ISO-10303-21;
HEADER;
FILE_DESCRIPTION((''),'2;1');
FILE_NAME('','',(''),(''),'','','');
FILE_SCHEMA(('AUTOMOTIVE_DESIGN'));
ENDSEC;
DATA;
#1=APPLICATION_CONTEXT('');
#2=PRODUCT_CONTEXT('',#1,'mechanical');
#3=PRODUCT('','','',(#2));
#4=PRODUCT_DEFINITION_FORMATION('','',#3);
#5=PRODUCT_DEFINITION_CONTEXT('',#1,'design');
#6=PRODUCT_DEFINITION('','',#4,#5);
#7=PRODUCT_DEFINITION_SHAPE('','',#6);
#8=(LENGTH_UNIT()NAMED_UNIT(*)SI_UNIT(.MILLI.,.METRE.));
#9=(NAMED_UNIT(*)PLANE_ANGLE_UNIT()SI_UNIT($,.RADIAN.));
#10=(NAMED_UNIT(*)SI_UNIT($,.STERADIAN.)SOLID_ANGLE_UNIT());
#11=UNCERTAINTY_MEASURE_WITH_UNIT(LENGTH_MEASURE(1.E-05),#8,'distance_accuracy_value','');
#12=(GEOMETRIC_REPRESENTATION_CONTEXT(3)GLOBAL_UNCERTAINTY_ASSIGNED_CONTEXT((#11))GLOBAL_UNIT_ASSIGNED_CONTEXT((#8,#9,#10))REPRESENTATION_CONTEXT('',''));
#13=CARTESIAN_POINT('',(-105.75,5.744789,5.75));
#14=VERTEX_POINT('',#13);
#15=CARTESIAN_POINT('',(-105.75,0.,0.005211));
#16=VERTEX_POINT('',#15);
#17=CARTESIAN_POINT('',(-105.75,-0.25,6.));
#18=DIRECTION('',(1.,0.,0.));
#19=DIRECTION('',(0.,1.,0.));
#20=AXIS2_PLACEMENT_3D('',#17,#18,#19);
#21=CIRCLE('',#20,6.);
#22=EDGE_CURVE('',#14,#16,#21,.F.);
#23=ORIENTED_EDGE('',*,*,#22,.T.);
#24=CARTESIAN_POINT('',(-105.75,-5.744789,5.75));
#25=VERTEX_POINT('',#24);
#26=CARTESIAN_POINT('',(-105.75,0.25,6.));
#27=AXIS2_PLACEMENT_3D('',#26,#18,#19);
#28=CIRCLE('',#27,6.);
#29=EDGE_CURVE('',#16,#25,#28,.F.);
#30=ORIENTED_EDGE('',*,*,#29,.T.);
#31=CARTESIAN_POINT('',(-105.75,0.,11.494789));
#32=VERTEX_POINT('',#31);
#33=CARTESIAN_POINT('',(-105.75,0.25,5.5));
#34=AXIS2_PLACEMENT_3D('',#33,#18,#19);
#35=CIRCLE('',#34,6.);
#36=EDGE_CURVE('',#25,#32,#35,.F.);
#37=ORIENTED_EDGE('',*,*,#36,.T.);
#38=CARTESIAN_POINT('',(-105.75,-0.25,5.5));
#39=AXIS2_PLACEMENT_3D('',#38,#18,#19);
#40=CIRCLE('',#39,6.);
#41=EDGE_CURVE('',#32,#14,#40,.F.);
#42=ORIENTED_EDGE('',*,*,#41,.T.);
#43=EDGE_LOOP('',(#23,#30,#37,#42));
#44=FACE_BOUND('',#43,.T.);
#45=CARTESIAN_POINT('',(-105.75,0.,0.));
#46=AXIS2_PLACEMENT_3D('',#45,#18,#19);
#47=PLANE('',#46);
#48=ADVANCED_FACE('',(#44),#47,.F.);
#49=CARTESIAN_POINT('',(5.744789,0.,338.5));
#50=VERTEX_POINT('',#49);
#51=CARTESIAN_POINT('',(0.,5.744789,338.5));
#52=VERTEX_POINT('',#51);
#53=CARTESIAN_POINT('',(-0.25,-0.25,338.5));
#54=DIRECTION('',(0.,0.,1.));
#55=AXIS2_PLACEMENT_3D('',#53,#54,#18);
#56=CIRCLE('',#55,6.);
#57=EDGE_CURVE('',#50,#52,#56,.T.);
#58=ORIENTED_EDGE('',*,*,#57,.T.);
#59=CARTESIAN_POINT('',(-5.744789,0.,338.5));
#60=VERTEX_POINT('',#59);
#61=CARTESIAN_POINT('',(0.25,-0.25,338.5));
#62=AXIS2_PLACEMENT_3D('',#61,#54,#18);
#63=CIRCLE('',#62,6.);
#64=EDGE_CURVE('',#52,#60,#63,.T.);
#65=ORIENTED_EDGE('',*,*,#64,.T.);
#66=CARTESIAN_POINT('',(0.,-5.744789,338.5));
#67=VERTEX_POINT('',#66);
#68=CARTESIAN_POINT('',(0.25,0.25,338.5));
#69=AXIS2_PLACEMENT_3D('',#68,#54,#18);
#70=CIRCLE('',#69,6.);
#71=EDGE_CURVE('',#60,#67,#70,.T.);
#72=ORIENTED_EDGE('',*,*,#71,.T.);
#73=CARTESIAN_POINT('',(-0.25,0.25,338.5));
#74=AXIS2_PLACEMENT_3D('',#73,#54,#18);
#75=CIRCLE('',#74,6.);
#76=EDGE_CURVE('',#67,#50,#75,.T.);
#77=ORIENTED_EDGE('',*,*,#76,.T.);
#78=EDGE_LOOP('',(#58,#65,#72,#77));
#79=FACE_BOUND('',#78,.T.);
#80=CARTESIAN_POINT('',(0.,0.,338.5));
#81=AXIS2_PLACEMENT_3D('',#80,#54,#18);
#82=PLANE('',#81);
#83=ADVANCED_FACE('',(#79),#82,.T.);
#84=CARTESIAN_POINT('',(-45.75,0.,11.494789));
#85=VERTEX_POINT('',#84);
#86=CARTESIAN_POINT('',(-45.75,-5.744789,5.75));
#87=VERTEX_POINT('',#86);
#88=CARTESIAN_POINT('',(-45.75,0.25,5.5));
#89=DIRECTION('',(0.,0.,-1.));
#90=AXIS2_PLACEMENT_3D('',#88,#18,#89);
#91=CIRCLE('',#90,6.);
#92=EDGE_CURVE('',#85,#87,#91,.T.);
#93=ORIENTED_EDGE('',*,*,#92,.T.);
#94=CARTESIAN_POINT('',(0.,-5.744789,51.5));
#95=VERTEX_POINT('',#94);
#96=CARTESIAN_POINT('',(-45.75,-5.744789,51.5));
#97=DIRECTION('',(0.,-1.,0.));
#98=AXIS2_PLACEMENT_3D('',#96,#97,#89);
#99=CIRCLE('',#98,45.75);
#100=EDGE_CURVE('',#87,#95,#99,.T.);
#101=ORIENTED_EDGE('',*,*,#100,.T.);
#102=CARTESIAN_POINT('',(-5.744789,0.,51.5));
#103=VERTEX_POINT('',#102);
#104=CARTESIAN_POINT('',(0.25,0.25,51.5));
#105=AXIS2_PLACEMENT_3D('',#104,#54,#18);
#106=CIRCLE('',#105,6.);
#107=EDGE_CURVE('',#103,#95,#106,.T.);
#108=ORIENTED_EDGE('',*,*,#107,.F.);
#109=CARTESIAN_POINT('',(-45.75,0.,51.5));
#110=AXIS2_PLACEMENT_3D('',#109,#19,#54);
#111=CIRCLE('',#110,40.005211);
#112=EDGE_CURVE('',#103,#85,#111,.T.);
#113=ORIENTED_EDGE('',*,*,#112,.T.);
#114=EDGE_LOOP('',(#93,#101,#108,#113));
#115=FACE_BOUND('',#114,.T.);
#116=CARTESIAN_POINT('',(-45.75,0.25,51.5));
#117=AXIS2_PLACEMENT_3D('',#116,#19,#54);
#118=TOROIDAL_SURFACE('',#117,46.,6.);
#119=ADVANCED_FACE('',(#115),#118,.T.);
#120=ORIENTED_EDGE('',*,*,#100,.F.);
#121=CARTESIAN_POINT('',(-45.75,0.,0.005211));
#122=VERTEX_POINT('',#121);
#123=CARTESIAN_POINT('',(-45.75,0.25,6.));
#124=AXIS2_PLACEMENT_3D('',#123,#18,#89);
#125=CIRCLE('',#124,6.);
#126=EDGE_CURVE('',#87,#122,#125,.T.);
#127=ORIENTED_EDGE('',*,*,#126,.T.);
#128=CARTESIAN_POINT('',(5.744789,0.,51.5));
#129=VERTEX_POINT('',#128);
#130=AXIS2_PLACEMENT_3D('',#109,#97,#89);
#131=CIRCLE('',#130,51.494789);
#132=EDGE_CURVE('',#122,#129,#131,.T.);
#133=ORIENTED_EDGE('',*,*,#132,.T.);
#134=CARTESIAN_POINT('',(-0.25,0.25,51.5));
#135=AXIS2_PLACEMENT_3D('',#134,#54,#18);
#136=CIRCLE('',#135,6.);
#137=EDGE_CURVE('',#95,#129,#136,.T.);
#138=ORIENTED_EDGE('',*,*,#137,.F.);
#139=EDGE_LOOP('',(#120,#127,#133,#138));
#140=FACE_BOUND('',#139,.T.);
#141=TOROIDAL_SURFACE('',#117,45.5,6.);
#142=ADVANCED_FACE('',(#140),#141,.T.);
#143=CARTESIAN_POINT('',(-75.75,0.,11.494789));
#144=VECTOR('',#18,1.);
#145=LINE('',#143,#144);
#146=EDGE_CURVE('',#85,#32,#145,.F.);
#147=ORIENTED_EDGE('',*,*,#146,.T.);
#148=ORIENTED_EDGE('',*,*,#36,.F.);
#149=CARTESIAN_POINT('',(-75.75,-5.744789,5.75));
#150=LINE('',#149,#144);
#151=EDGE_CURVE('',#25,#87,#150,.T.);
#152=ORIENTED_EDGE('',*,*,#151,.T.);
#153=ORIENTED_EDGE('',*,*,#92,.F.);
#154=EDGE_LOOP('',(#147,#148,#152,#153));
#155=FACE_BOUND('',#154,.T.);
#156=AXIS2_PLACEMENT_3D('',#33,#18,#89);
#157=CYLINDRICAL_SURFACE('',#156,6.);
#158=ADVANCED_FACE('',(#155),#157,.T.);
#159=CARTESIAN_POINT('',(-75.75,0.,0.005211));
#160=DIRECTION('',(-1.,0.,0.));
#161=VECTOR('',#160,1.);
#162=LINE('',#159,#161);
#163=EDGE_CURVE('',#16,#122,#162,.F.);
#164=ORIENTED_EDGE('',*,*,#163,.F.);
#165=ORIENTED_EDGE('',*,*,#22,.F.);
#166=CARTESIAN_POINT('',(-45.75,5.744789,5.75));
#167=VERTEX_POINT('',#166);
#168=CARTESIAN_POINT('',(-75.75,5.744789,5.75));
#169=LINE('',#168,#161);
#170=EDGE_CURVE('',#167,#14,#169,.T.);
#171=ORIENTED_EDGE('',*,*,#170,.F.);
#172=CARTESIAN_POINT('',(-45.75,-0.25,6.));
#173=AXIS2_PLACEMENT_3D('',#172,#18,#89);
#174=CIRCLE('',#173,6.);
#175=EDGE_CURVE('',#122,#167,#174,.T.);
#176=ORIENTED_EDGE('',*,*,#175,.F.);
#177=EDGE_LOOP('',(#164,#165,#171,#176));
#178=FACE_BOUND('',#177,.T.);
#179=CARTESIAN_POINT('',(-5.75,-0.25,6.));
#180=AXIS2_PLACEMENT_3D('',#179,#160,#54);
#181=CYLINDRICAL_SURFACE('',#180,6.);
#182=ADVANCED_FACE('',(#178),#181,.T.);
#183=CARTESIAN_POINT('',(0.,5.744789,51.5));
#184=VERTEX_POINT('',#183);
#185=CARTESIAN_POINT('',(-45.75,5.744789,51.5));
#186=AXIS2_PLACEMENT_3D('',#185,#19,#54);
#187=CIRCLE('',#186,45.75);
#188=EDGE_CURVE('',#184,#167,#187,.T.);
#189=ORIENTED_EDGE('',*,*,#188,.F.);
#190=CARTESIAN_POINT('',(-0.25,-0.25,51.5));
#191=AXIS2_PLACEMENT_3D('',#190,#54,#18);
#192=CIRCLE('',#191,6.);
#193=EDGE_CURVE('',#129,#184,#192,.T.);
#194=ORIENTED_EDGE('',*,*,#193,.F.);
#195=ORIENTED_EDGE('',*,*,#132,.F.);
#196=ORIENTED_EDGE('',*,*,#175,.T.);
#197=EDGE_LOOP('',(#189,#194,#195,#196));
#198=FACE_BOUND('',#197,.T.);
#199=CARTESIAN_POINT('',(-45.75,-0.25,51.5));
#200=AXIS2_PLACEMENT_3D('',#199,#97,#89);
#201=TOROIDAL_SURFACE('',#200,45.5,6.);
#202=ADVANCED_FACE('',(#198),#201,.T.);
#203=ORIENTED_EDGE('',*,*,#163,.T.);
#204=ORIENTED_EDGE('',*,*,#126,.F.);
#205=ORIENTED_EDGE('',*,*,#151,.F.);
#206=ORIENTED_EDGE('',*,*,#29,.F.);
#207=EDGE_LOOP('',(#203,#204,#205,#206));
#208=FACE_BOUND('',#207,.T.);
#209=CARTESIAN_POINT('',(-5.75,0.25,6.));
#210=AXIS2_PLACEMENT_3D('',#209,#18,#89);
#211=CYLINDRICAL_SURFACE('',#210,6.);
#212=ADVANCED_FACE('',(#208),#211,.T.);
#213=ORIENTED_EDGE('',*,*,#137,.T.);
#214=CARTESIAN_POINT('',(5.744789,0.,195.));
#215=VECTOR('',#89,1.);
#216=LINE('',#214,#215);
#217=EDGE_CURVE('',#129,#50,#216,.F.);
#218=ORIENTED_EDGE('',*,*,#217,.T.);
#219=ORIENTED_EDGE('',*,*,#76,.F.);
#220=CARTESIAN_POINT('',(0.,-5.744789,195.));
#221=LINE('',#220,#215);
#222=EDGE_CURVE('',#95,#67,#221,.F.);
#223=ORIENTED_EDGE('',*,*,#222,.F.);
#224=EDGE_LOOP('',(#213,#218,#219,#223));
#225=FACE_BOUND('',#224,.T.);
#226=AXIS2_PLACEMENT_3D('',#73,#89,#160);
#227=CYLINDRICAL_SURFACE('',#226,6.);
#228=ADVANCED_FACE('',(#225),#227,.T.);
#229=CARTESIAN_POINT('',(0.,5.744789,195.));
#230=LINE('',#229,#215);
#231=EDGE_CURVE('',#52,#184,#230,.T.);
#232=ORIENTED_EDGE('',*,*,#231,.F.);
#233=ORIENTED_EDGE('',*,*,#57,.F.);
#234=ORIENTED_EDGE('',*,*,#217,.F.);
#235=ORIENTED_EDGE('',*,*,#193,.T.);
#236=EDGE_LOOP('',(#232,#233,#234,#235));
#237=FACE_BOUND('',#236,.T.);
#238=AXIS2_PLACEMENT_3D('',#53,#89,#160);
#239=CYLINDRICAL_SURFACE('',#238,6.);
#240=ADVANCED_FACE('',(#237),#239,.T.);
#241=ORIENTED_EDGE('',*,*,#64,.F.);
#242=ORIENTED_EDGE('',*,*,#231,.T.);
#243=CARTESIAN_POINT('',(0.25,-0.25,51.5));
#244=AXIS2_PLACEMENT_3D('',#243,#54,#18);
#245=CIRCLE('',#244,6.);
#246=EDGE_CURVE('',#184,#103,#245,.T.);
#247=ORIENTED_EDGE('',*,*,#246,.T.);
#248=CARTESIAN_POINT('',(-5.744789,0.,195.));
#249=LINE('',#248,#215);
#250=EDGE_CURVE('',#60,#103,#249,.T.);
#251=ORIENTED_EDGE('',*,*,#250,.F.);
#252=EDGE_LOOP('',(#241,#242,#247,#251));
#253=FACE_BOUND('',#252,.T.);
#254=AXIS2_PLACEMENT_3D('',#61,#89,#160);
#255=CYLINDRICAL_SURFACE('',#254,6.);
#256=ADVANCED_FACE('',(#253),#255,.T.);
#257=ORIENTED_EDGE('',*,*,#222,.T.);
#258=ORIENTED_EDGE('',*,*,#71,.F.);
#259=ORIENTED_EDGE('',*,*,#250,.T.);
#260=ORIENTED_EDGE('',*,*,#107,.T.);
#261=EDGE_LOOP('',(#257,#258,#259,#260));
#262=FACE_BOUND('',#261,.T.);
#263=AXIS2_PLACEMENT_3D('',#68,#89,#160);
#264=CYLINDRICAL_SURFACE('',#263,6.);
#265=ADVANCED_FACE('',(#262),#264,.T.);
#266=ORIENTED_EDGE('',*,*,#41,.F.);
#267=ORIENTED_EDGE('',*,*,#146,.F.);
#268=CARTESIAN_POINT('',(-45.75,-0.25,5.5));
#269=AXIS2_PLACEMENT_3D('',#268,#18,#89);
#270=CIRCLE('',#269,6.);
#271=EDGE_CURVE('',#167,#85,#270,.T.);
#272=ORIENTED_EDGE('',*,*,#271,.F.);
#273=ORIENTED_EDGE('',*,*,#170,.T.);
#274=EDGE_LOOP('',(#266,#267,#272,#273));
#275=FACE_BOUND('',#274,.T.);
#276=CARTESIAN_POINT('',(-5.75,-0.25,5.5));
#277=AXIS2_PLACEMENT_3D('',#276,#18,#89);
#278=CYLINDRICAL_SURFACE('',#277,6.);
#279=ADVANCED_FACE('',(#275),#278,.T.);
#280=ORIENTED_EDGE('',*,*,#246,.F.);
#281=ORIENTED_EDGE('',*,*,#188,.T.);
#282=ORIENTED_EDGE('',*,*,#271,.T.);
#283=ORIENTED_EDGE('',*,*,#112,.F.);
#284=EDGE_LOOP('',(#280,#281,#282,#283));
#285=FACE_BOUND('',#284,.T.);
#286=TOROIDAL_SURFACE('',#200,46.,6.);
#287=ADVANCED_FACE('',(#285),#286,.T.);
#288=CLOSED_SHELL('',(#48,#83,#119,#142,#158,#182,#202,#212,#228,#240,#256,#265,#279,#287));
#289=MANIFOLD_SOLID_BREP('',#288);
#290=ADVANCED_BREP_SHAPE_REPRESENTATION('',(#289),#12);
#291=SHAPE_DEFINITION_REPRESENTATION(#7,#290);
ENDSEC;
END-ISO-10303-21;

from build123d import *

# Parameters (mm, degrees)
SKETCH1_W           = 11.5
SKETCH1_H           = 11.5
BOSS_EXTRUDE1_DEPTH = 338.5
SKETCH2_W           = 11.5
SKETCH2_H           = 11.5
BOSS_EXTRUDE2_DEPTH = 100
FILLET1_R           = 40
FILLET2_R           = 51.5
FILLET3_R           = 6


with BuildPart() as part:
    # Sketch1 → Boss-Extrude1 (new body)
    with BuildSketch(Plane.XY):
        Rectangle(SKETCH1_W, SKETCH1_H)
    extrude(amount=BOSS_EXTRUDE1_DEPTH)

    # Sketch2 → Boss-Extrude2 (add)
    with BuildSketch(Plane.ZY.offset(5.75)):
        with Locations((5.75, 0)):
            Rectangle(SKETCH2_W, SKETCH2_H)
    extrude(amount=BOSS_EXTRUDE2_DEPTH)

    # Fillet1
    fillet1_edges = [part.edges().sort_by_distance(p)[0] for p in [
        (-5.75, 0, 11.5),
    ]]
    fillet(fillet1_edges, radius=FILLET1_R)

    # Fillet2
    fillet2_edges = [part.edges().sort_by_distance(p)[0] for p in [
        (5.75, 0, 0),
    ]]
    fillet(fillet2_edges, radius=FILLET2_R)

    # Fillet3
    # the kernel refuses this fillet: 6 mm, written as the material it takes off along each edge
    with BuildSketch(Plane(origin=(-5.75, -5.75, 51.5), x_dir=(0, 1, 0), z_dir=(0, 0, 1)), Plane(origin=(-5.75, 5.75, 51.5), x_dir=(1, 0, 0), z_dir=(0, 0, 1))) as fillet3_piece_1:
        with BuildLine():
            CenterArc((FILLET3_R, -FILLET3_R), FILLET3_R, 90, 90)
            Line((0, -FILLET3_R), (0, 0))
            Line((0, 0), (FILLET3_R, 0))
        make_face()
    extrude(amount=302, mode=Mode.SUBTRACT)
    with BuildSketch(Plane(origin=(-45.75, -5.75, 51.5), x_dir=(0, 0, -1), z_dir=(-1, 0, 0))) as fillet3_piece_2:
        with BuildLine():
            CenterArc((40 + FILLET3_R, -FILLET3_R), FILLET3_R, 90, 90)
            Line((40 + FILLET3_R, 0), (40, 0))
            Line((40, 0), (40, -FILLET3_R))
        make_face()
    revolve(axis=Axis((-45.75, -5.75, 51.5), (0, -1, 0)), revolution_arc=90, mode=Mode.SUBTRACT)
    with BuildSketch(Plane(origin=(-45.75, 5.75, 51.5), x_dir=(0, 0, -1), z_dir=(-1, 0, 0))) as fillet3_piece_3:
        with BuildLine():
            CenterArc((40 + FILLET3_R, FILLET3_R), FILLET3_R, 180, 90)
            Line((40, FILLET3_R), (40, 0))
            Line((40, 0), (40 + FILLET3_R, 0))
        make_face()
    revolve(axis=Axis((-45.75, 5.75, 51.5), (0, -1, 0)), revolution_arc=90, mode=Mode.SUBTRACT)
    with BuildSketch(Plane(origin=(5.75, -5.75, 51.5), x_dir=(0, 1, 0), z_dir=(0, 0, 1)), Plane(origin=(5.75, 5.75, 51.5), x_dir=(-1, 0, 0), z_dir=(0, 0, 1))) as fillet3_piece_4:
        with BuildLine():
            CenterArc((FILLET3_R, FILLET3_R), FILLET3_R, 180, 90)
            Line((0, FILLET3_R), (0, 0))
            Line((0, 0), (FILLET3_R, 0))
        make_face()
    extrude(amount=302, mode=Mode.SUBTRACT)
    with BuildSketch(Plane(origin=(-45.75, -5.75, 51.5), x_dir=(1, 0, 0), z_dir=(0, 0, 1))) as fillet3_piece_5:
        with BuildLine():
            CenterArc((51.5 - FILLET3_R, FILLET3_R), FILLET3_R, 270, 90)
            Line((51.5 - FILLET3_R, 0), (51.5, 0))
            Line((51.5, 0), (51.5, FILLET3_R))
        make_face()
    revolve(axis=Axis((-45.75, -5.75, 51.5), (0, 1, 0)), revolution_arc=90, mode=Mode.SUBTRACT)
    with BuildSketch(Plane(origin=(-45.75, 5.75, 51.5), x_dir=(1, 0, 0), z_dir=(0, 0, 1))) as fillet3_piece_6:
        with BuildLine():
            CenterArc((51.5 - FILLET3_R, -FILLET3_R), FILLET3_R, 0, 90)
            Line((51.5, -FILLET3_R), (51.5, 0))
            Line((51.5, 0), (51.5 - FILLET3_R, 0))
        make_face()
    revolve(axis=Axis((-45.75, 5.75, 51.5), (0, 1, 0)), revolution_arc=90, mode=Mode.SUBTRACT)
    with BuildSketch(Plane(origin=(-45.75, -5.75, 11.5), x_dir=(0, 1, 0), z_dir=(-1, 0, 0)), Plane(origin=(-45.75, 5.75, 11.5), x_dir=(0, 0, -1), z_dir=(-1, 0, 0))) as fillet3_piece_7:
        with BuildLine():
            CenterArc((FILLET3_R, FILLET3_R), FILLET3_R, 180, 90)
            Line((0, FILLET3_R), (0, 0))
            Line((0, 0), (FILLET3_R, 0))
        make_face()
    extrude(amount=75, mode=Mode.SUBTRACT)
    with BuildSketch(Plane(origin=(-45.75, -5.75, 0), x_dir=(0, 1, 0), z_dir=(-1, 0, 0)), Plane(origin=(-45.75, 5.75, 0), x_dir=(0, 0, 1), z_dir=(-1, 0, 0))) as fillet3_piece_8:
        with BuildLine():
            CenterArc((FILLET3_R, -FILLET3_R), FILLET3_R, 90, 90)
            Line((0, -FILLET3_R), (0, 0))
            Line((0, 0), (FILLET3_R, 0))
        make_face()
    extrude(amount=75, mode=Mode.SUBTRACT)


solid = part.part
